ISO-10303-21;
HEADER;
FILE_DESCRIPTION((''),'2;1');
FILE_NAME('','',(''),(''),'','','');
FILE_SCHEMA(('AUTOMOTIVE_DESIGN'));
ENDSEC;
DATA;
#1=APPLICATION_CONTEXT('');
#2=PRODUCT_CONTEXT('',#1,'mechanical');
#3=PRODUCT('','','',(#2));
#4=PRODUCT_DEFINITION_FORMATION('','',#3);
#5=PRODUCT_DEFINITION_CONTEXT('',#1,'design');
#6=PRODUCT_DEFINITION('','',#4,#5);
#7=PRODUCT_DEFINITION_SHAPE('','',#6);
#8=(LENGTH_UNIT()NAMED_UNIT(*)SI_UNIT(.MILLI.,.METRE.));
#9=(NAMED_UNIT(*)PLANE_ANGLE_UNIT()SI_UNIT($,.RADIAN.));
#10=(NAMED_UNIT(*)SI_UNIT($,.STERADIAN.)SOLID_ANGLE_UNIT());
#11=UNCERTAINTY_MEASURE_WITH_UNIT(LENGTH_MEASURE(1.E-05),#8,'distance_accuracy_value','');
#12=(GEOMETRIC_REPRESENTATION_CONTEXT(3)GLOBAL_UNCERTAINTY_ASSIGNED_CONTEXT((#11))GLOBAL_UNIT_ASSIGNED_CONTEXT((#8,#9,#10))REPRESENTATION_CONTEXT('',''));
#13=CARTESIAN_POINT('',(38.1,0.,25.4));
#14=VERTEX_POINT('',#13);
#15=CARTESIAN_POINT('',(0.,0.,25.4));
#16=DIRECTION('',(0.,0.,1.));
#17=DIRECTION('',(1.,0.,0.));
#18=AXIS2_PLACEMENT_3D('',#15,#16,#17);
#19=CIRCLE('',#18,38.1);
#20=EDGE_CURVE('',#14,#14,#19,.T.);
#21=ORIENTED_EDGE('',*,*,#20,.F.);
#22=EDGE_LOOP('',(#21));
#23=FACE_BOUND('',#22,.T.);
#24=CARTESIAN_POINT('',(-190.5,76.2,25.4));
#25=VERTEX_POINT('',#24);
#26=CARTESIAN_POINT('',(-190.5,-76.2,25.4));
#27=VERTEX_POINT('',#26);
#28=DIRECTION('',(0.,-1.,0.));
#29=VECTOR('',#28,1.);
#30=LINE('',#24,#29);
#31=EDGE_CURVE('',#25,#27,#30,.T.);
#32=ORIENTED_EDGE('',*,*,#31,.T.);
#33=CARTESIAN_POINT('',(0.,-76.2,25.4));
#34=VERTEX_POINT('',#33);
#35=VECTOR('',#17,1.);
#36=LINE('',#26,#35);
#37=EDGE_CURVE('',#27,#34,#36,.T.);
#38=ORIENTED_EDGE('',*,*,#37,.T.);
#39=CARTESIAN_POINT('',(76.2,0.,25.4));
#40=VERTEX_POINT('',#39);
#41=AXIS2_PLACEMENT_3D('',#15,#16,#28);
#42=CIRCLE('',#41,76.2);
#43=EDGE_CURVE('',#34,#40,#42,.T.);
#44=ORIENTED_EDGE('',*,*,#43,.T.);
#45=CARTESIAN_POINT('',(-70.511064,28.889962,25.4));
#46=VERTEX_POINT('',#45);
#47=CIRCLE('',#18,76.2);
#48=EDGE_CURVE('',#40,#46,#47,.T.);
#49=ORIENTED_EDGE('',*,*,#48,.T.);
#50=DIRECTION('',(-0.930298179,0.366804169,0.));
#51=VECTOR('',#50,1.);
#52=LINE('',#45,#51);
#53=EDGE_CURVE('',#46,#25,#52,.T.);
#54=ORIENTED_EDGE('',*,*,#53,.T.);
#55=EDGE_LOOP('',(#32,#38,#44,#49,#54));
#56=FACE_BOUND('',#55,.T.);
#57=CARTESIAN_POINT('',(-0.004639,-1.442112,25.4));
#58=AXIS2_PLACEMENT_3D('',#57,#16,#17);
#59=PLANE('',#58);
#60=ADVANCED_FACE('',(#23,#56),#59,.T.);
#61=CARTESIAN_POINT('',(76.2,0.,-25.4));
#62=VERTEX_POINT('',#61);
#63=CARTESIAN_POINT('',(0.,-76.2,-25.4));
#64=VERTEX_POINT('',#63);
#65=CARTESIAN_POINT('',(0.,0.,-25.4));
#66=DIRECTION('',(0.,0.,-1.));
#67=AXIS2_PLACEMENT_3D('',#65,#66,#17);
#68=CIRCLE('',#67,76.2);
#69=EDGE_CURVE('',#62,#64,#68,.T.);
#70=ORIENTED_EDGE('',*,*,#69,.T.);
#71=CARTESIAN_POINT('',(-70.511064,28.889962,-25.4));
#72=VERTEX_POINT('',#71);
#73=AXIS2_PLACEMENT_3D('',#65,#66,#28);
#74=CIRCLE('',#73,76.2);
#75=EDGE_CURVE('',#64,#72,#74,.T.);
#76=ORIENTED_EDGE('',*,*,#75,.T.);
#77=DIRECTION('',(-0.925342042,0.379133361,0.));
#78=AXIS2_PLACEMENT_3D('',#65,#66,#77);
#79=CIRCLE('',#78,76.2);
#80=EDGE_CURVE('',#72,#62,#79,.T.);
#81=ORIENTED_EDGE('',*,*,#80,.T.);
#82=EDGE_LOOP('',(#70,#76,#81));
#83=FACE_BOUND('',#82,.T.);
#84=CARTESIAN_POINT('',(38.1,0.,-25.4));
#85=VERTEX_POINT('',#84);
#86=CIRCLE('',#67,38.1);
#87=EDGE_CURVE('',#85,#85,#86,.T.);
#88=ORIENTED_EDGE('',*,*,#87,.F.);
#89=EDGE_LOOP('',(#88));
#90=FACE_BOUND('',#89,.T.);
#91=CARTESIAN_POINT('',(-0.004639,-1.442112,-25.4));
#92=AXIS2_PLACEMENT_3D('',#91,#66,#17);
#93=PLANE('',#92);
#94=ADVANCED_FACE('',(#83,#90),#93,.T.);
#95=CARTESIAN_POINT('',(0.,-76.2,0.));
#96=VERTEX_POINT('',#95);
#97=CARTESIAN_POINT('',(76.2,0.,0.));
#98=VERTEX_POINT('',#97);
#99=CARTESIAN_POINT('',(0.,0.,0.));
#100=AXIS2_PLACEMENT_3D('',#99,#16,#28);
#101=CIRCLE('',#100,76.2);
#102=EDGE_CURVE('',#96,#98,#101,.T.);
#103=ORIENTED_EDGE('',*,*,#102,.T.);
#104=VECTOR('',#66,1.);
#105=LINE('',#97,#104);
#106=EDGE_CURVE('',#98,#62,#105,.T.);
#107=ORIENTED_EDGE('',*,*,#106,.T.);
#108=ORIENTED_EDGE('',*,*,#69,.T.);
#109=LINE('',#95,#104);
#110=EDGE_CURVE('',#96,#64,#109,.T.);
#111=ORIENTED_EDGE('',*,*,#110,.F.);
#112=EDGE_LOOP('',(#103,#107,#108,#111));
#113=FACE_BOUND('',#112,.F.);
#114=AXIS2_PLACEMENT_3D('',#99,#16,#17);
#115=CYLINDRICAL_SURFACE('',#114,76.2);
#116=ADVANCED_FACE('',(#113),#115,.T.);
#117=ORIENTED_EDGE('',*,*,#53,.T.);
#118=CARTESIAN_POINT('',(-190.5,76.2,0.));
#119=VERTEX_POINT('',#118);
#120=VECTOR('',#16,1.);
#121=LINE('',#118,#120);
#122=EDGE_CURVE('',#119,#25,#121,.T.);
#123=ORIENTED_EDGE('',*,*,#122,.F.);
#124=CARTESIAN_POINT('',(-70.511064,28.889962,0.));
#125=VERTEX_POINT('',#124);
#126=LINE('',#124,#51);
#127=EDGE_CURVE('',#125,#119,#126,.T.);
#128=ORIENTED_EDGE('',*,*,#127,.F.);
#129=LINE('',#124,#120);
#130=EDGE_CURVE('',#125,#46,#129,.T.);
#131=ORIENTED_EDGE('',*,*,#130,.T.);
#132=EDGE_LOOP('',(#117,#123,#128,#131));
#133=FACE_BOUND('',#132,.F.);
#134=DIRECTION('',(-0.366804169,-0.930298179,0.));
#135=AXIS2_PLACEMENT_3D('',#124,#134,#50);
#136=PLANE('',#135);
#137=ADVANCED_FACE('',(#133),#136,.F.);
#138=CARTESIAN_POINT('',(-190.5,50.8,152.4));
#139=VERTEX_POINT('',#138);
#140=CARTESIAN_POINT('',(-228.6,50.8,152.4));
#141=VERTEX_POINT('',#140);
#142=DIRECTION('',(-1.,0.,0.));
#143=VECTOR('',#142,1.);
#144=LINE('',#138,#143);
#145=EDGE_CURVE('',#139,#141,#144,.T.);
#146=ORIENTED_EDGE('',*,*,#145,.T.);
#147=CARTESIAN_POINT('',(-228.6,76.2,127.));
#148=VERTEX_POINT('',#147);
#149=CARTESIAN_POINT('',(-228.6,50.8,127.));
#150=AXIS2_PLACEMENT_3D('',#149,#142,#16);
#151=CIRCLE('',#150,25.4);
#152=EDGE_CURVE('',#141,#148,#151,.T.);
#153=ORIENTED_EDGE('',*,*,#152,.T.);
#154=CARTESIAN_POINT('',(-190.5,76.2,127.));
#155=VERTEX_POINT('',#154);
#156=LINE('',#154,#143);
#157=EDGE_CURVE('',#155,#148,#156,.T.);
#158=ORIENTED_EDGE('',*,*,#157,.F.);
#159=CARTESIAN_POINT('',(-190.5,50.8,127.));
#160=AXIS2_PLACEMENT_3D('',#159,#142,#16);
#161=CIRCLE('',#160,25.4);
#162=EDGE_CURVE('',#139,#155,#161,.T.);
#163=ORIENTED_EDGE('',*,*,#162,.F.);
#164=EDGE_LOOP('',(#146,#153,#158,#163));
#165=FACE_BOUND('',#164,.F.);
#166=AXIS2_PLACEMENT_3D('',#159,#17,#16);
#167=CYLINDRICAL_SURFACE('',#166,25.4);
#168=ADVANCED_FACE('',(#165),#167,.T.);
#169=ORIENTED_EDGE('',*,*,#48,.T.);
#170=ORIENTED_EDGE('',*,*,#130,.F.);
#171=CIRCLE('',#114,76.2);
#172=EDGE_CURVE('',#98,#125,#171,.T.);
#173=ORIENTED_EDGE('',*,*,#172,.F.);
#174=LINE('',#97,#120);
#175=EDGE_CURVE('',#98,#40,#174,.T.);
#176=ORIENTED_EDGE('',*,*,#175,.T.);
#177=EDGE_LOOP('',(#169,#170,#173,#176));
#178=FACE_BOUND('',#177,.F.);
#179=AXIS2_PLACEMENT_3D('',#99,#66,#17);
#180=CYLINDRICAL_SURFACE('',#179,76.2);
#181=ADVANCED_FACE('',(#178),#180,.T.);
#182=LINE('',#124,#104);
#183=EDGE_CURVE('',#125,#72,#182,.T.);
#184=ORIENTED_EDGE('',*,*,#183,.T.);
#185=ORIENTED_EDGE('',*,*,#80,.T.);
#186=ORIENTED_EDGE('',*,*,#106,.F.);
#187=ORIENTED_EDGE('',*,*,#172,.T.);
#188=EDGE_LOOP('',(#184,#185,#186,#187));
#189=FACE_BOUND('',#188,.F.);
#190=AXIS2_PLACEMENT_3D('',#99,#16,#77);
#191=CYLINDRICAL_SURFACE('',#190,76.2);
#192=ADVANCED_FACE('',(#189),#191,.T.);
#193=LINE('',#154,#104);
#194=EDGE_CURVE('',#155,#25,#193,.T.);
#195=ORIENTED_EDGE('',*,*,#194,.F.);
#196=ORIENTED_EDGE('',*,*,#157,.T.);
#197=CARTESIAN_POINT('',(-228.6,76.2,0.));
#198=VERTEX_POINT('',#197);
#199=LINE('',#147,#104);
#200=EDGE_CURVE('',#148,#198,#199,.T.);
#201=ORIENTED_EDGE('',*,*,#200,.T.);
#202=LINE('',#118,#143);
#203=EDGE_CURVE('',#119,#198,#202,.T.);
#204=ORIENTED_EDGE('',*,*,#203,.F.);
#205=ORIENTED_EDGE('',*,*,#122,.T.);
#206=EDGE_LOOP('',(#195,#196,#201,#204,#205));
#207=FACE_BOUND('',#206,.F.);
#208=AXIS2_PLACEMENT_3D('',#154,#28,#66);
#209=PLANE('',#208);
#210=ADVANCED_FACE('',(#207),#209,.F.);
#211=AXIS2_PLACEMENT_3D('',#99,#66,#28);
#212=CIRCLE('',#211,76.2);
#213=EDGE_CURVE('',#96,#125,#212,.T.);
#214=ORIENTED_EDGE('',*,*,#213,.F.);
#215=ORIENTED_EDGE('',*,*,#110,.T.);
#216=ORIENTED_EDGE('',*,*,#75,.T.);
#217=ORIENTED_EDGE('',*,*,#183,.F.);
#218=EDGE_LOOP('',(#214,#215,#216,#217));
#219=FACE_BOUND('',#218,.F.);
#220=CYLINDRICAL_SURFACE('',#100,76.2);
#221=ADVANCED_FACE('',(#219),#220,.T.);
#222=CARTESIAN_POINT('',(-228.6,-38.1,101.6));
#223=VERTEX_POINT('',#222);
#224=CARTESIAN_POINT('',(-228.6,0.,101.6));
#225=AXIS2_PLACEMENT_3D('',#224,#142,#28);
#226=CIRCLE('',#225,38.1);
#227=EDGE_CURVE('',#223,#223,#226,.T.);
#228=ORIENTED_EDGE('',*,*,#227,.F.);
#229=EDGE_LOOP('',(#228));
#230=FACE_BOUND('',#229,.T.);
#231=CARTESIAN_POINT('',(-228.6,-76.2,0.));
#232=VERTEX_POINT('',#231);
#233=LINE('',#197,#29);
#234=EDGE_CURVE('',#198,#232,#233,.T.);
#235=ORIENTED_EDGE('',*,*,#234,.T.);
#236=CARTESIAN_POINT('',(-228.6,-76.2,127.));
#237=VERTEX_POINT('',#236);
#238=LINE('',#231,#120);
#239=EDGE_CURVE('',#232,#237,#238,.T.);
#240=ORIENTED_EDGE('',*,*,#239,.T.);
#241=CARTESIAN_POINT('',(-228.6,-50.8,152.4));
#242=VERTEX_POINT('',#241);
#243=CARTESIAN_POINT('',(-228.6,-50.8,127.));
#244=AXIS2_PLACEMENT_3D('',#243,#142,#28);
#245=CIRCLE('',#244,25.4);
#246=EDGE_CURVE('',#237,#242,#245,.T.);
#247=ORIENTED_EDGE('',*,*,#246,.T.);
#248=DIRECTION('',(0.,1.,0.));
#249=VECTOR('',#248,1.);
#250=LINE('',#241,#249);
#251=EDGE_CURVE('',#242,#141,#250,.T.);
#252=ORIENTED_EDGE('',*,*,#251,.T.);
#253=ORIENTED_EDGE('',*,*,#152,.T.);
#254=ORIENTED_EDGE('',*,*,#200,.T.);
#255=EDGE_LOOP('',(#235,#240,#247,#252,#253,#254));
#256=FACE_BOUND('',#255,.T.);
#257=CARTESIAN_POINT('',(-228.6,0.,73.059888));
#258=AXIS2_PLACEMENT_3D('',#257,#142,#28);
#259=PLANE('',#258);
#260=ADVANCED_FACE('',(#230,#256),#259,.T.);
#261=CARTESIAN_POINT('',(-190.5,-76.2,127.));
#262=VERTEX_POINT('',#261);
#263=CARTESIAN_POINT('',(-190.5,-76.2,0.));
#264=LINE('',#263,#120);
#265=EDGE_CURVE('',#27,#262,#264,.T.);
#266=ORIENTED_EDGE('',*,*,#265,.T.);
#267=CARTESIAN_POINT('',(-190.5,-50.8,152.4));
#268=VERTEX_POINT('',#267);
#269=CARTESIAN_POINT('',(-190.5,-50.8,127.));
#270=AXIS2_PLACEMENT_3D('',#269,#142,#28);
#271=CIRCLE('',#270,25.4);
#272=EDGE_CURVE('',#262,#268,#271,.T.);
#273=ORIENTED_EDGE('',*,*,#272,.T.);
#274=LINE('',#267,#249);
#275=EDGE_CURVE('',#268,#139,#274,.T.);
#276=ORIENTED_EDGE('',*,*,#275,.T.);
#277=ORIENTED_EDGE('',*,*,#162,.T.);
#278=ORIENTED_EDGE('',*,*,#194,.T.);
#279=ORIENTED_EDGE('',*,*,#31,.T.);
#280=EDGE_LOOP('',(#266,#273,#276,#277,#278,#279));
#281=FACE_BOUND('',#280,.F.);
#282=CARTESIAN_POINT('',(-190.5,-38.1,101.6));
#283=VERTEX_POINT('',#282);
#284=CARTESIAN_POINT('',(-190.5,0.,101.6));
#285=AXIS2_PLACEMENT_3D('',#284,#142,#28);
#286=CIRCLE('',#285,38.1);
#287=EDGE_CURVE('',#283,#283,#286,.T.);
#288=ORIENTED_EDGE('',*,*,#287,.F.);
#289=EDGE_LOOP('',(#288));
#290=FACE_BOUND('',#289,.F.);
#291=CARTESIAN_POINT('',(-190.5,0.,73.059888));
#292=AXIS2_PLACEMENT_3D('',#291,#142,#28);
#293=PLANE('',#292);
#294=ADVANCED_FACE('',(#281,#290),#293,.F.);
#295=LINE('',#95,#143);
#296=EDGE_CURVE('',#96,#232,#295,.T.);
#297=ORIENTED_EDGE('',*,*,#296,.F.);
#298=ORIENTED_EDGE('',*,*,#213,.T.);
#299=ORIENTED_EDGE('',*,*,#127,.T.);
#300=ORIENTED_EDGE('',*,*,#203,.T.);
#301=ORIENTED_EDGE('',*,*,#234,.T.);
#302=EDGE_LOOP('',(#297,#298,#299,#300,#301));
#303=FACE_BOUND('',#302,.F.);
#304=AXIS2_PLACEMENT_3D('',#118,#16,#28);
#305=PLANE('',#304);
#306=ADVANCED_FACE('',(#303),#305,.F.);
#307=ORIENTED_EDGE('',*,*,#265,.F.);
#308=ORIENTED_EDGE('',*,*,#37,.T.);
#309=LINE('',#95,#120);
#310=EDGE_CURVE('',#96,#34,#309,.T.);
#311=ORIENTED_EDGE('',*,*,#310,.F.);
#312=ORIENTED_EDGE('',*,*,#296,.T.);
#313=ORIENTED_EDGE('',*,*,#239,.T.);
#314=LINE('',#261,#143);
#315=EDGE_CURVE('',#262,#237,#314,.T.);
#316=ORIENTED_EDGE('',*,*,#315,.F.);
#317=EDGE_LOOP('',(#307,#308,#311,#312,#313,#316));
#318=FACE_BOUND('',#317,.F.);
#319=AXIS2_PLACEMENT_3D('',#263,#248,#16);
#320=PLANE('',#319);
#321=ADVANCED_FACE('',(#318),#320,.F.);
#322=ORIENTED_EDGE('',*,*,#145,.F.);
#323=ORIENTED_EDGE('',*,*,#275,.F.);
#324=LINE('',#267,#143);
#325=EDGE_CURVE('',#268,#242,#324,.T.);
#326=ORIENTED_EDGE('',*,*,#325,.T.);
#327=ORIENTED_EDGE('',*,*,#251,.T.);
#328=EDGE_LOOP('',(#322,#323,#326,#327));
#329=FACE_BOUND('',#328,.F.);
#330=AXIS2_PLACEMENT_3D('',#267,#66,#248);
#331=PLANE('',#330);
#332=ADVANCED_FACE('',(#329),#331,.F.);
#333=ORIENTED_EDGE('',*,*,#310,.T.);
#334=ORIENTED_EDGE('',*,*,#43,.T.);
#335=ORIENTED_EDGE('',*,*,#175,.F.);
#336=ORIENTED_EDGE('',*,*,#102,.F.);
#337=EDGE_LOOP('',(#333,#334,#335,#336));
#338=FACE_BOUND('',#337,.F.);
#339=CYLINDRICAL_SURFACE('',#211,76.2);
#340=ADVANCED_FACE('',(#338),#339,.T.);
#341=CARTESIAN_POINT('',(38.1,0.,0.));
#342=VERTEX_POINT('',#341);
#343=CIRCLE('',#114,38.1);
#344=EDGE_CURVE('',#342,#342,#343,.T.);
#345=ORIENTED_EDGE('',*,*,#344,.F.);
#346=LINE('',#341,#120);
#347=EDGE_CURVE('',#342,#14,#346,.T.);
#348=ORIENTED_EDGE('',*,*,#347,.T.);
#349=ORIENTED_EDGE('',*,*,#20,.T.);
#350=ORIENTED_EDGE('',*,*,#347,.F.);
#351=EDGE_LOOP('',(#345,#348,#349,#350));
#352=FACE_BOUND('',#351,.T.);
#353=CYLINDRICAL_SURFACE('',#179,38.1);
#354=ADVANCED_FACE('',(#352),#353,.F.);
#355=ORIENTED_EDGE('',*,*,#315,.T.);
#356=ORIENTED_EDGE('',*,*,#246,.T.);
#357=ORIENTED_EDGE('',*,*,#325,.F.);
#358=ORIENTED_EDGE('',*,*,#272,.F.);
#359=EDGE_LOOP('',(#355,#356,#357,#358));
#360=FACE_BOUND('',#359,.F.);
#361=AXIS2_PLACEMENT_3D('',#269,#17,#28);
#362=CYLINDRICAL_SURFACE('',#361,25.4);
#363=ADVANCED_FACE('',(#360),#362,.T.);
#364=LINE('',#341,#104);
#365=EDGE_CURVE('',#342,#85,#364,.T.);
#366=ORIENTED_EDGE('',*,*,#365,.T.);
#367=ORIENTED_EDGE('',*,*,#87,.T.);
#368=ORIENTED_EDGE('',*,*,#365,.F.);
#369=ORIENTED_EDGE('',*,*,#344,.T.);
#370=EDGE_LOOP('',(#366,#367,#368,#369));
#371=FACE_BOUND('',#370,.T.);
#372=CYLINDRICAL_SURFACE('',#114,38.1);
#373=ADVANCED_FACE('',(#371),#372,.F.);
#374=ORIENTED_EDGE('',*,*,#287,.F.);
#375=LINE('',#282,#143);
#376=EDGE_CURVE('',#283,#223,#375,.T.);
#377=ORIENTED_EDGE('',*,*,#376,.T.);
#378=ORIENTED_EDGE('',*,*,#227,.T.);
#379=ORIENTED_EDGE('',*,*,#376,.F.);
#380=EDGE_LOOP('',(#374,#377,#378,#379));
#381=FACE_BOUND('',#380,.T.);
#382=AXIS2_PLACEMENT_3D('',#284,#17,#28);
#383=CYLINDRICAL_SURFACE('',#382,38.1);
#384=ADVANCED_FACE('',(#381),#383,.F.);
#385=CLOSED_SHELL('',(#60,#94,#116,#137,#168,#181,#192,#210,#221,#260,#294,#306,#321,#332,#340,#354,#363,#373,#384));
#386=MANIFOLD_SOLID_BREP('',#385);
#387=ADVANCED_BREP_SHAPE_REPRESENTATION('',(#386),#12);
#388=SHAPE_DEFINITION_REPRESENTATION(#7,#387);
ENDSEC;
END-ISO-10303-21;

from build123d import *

# Parameters (mm, degrees)
F0_R     = 38.1
F1_DEPTH = 25.4
F2_R     = 38.1
F3_DEPTH = 25.4
F4_R     = 38.1
F5_DEPTH = 38.1


with BuildPart() as f1:
    # F0 (on Top) → F1 (new body)
    with BuildSketch(Plane.XY):
        with BuildLine():
            ThreePointArc((0, -76.2), (53.8815367264, -53.8815367264), (76.2, 0))
            ThreePointArc((76.2, 0), (14.7223801552, 74.7642395973), (-70.5110635844, 28.8899621357))
            ThreePointArc((-70.5110635844, 28.8899621357), (-63.2765956525, -42.4560059665), (0, -76.2))
        make_face()
        Circle(F0_R, mode=Mode.SUBTRACT)
        with BuildLine():
            ThreePointArc((0, -76.2), (-63.2765956525, -42.4560059665), (-70.5110635844, 28.8899621357))
            Line((-70.5110635844, 28.8899621357), (-190.5, 76.2))
            Line((-190.5, 76.2), (-190.5, -76.2))
            Line((-190.5, -76.2), (0, -76.2))
        make_face()
    extrude(amount=F1_DEPTH)

    # F2 (on face) → F3 (join)
    with BuildSketch(Plane(origin=(0, 0, 0), x_dir=(1, 0, 0), z_dir=(0, 0, -1))):
        with BuildLine():
            ThreePointArc((-70.5110635844, -28.8899621357), (14.7223801552, -74.7642395973), (76.2, 0))
            ThreePointArc((76.2, 0), (53.8815367264, 53.8815367264), (0, 76.2))
            ThreePointArc((0, 76.2), (-63.2765956525, 42.4560059665), (-70.5110635844, -28.8899621357))
        make_face()
        Circle(F2_R, mode=Mode.SUBTRACT)
    extrude(amount=F3_DEPTH)

    # F4 (on face) → F5 (join)
    with BuildSketch(Plane(origin=(-190.5, 0, 0), x_dir=(0, -1, 0), z_dir=(-1, 0, 0))):
        with BuildLine():
            Line((-76.2, 0), (76.2, 0))
            Line((76.2, 0), (76.2, 127))
            ThreePointArc((76.2, 127), (68.7605122421, 144.9605122421), (50.8, 152.4))
            Line((50.8, 152.4), (-50.8, 152.4))
            ThreePointArc((-50.8, 152.4), (-68.7605122421, 144.9605122421), (-76.2, 127))
            Line((-76.2, 127), (-76.2, 0))
        make_face()
        with Locations((0, 101.6)):
            Circle(F4_R, mode=Mode.SUBTRACT)
        with BuildLine():
            Line((-76.2, 25.4), (76.2, 25.4))
            Line((76.2, 25.4), (76.2, 127))
            ThreePointArc((76.2, 127), (68.7605122421, 144.9605122421), (50.8, 152.4))
            Line((50.8, 152.4), (-50.8, 152.4))
            ThreePointArc((-50.8, 152.4), (-68.7605122421, 144.9605122421), (-76.2, 127))
            Line((-76.2, 127), (-76.2, 25.4))
        make_face()
        with Locations((0, 101.6)):
            Circle(F4_R, mode=Mode.SUBTRACT)
    extrude(amount=F5_DEPTH)


solid = f1.part
